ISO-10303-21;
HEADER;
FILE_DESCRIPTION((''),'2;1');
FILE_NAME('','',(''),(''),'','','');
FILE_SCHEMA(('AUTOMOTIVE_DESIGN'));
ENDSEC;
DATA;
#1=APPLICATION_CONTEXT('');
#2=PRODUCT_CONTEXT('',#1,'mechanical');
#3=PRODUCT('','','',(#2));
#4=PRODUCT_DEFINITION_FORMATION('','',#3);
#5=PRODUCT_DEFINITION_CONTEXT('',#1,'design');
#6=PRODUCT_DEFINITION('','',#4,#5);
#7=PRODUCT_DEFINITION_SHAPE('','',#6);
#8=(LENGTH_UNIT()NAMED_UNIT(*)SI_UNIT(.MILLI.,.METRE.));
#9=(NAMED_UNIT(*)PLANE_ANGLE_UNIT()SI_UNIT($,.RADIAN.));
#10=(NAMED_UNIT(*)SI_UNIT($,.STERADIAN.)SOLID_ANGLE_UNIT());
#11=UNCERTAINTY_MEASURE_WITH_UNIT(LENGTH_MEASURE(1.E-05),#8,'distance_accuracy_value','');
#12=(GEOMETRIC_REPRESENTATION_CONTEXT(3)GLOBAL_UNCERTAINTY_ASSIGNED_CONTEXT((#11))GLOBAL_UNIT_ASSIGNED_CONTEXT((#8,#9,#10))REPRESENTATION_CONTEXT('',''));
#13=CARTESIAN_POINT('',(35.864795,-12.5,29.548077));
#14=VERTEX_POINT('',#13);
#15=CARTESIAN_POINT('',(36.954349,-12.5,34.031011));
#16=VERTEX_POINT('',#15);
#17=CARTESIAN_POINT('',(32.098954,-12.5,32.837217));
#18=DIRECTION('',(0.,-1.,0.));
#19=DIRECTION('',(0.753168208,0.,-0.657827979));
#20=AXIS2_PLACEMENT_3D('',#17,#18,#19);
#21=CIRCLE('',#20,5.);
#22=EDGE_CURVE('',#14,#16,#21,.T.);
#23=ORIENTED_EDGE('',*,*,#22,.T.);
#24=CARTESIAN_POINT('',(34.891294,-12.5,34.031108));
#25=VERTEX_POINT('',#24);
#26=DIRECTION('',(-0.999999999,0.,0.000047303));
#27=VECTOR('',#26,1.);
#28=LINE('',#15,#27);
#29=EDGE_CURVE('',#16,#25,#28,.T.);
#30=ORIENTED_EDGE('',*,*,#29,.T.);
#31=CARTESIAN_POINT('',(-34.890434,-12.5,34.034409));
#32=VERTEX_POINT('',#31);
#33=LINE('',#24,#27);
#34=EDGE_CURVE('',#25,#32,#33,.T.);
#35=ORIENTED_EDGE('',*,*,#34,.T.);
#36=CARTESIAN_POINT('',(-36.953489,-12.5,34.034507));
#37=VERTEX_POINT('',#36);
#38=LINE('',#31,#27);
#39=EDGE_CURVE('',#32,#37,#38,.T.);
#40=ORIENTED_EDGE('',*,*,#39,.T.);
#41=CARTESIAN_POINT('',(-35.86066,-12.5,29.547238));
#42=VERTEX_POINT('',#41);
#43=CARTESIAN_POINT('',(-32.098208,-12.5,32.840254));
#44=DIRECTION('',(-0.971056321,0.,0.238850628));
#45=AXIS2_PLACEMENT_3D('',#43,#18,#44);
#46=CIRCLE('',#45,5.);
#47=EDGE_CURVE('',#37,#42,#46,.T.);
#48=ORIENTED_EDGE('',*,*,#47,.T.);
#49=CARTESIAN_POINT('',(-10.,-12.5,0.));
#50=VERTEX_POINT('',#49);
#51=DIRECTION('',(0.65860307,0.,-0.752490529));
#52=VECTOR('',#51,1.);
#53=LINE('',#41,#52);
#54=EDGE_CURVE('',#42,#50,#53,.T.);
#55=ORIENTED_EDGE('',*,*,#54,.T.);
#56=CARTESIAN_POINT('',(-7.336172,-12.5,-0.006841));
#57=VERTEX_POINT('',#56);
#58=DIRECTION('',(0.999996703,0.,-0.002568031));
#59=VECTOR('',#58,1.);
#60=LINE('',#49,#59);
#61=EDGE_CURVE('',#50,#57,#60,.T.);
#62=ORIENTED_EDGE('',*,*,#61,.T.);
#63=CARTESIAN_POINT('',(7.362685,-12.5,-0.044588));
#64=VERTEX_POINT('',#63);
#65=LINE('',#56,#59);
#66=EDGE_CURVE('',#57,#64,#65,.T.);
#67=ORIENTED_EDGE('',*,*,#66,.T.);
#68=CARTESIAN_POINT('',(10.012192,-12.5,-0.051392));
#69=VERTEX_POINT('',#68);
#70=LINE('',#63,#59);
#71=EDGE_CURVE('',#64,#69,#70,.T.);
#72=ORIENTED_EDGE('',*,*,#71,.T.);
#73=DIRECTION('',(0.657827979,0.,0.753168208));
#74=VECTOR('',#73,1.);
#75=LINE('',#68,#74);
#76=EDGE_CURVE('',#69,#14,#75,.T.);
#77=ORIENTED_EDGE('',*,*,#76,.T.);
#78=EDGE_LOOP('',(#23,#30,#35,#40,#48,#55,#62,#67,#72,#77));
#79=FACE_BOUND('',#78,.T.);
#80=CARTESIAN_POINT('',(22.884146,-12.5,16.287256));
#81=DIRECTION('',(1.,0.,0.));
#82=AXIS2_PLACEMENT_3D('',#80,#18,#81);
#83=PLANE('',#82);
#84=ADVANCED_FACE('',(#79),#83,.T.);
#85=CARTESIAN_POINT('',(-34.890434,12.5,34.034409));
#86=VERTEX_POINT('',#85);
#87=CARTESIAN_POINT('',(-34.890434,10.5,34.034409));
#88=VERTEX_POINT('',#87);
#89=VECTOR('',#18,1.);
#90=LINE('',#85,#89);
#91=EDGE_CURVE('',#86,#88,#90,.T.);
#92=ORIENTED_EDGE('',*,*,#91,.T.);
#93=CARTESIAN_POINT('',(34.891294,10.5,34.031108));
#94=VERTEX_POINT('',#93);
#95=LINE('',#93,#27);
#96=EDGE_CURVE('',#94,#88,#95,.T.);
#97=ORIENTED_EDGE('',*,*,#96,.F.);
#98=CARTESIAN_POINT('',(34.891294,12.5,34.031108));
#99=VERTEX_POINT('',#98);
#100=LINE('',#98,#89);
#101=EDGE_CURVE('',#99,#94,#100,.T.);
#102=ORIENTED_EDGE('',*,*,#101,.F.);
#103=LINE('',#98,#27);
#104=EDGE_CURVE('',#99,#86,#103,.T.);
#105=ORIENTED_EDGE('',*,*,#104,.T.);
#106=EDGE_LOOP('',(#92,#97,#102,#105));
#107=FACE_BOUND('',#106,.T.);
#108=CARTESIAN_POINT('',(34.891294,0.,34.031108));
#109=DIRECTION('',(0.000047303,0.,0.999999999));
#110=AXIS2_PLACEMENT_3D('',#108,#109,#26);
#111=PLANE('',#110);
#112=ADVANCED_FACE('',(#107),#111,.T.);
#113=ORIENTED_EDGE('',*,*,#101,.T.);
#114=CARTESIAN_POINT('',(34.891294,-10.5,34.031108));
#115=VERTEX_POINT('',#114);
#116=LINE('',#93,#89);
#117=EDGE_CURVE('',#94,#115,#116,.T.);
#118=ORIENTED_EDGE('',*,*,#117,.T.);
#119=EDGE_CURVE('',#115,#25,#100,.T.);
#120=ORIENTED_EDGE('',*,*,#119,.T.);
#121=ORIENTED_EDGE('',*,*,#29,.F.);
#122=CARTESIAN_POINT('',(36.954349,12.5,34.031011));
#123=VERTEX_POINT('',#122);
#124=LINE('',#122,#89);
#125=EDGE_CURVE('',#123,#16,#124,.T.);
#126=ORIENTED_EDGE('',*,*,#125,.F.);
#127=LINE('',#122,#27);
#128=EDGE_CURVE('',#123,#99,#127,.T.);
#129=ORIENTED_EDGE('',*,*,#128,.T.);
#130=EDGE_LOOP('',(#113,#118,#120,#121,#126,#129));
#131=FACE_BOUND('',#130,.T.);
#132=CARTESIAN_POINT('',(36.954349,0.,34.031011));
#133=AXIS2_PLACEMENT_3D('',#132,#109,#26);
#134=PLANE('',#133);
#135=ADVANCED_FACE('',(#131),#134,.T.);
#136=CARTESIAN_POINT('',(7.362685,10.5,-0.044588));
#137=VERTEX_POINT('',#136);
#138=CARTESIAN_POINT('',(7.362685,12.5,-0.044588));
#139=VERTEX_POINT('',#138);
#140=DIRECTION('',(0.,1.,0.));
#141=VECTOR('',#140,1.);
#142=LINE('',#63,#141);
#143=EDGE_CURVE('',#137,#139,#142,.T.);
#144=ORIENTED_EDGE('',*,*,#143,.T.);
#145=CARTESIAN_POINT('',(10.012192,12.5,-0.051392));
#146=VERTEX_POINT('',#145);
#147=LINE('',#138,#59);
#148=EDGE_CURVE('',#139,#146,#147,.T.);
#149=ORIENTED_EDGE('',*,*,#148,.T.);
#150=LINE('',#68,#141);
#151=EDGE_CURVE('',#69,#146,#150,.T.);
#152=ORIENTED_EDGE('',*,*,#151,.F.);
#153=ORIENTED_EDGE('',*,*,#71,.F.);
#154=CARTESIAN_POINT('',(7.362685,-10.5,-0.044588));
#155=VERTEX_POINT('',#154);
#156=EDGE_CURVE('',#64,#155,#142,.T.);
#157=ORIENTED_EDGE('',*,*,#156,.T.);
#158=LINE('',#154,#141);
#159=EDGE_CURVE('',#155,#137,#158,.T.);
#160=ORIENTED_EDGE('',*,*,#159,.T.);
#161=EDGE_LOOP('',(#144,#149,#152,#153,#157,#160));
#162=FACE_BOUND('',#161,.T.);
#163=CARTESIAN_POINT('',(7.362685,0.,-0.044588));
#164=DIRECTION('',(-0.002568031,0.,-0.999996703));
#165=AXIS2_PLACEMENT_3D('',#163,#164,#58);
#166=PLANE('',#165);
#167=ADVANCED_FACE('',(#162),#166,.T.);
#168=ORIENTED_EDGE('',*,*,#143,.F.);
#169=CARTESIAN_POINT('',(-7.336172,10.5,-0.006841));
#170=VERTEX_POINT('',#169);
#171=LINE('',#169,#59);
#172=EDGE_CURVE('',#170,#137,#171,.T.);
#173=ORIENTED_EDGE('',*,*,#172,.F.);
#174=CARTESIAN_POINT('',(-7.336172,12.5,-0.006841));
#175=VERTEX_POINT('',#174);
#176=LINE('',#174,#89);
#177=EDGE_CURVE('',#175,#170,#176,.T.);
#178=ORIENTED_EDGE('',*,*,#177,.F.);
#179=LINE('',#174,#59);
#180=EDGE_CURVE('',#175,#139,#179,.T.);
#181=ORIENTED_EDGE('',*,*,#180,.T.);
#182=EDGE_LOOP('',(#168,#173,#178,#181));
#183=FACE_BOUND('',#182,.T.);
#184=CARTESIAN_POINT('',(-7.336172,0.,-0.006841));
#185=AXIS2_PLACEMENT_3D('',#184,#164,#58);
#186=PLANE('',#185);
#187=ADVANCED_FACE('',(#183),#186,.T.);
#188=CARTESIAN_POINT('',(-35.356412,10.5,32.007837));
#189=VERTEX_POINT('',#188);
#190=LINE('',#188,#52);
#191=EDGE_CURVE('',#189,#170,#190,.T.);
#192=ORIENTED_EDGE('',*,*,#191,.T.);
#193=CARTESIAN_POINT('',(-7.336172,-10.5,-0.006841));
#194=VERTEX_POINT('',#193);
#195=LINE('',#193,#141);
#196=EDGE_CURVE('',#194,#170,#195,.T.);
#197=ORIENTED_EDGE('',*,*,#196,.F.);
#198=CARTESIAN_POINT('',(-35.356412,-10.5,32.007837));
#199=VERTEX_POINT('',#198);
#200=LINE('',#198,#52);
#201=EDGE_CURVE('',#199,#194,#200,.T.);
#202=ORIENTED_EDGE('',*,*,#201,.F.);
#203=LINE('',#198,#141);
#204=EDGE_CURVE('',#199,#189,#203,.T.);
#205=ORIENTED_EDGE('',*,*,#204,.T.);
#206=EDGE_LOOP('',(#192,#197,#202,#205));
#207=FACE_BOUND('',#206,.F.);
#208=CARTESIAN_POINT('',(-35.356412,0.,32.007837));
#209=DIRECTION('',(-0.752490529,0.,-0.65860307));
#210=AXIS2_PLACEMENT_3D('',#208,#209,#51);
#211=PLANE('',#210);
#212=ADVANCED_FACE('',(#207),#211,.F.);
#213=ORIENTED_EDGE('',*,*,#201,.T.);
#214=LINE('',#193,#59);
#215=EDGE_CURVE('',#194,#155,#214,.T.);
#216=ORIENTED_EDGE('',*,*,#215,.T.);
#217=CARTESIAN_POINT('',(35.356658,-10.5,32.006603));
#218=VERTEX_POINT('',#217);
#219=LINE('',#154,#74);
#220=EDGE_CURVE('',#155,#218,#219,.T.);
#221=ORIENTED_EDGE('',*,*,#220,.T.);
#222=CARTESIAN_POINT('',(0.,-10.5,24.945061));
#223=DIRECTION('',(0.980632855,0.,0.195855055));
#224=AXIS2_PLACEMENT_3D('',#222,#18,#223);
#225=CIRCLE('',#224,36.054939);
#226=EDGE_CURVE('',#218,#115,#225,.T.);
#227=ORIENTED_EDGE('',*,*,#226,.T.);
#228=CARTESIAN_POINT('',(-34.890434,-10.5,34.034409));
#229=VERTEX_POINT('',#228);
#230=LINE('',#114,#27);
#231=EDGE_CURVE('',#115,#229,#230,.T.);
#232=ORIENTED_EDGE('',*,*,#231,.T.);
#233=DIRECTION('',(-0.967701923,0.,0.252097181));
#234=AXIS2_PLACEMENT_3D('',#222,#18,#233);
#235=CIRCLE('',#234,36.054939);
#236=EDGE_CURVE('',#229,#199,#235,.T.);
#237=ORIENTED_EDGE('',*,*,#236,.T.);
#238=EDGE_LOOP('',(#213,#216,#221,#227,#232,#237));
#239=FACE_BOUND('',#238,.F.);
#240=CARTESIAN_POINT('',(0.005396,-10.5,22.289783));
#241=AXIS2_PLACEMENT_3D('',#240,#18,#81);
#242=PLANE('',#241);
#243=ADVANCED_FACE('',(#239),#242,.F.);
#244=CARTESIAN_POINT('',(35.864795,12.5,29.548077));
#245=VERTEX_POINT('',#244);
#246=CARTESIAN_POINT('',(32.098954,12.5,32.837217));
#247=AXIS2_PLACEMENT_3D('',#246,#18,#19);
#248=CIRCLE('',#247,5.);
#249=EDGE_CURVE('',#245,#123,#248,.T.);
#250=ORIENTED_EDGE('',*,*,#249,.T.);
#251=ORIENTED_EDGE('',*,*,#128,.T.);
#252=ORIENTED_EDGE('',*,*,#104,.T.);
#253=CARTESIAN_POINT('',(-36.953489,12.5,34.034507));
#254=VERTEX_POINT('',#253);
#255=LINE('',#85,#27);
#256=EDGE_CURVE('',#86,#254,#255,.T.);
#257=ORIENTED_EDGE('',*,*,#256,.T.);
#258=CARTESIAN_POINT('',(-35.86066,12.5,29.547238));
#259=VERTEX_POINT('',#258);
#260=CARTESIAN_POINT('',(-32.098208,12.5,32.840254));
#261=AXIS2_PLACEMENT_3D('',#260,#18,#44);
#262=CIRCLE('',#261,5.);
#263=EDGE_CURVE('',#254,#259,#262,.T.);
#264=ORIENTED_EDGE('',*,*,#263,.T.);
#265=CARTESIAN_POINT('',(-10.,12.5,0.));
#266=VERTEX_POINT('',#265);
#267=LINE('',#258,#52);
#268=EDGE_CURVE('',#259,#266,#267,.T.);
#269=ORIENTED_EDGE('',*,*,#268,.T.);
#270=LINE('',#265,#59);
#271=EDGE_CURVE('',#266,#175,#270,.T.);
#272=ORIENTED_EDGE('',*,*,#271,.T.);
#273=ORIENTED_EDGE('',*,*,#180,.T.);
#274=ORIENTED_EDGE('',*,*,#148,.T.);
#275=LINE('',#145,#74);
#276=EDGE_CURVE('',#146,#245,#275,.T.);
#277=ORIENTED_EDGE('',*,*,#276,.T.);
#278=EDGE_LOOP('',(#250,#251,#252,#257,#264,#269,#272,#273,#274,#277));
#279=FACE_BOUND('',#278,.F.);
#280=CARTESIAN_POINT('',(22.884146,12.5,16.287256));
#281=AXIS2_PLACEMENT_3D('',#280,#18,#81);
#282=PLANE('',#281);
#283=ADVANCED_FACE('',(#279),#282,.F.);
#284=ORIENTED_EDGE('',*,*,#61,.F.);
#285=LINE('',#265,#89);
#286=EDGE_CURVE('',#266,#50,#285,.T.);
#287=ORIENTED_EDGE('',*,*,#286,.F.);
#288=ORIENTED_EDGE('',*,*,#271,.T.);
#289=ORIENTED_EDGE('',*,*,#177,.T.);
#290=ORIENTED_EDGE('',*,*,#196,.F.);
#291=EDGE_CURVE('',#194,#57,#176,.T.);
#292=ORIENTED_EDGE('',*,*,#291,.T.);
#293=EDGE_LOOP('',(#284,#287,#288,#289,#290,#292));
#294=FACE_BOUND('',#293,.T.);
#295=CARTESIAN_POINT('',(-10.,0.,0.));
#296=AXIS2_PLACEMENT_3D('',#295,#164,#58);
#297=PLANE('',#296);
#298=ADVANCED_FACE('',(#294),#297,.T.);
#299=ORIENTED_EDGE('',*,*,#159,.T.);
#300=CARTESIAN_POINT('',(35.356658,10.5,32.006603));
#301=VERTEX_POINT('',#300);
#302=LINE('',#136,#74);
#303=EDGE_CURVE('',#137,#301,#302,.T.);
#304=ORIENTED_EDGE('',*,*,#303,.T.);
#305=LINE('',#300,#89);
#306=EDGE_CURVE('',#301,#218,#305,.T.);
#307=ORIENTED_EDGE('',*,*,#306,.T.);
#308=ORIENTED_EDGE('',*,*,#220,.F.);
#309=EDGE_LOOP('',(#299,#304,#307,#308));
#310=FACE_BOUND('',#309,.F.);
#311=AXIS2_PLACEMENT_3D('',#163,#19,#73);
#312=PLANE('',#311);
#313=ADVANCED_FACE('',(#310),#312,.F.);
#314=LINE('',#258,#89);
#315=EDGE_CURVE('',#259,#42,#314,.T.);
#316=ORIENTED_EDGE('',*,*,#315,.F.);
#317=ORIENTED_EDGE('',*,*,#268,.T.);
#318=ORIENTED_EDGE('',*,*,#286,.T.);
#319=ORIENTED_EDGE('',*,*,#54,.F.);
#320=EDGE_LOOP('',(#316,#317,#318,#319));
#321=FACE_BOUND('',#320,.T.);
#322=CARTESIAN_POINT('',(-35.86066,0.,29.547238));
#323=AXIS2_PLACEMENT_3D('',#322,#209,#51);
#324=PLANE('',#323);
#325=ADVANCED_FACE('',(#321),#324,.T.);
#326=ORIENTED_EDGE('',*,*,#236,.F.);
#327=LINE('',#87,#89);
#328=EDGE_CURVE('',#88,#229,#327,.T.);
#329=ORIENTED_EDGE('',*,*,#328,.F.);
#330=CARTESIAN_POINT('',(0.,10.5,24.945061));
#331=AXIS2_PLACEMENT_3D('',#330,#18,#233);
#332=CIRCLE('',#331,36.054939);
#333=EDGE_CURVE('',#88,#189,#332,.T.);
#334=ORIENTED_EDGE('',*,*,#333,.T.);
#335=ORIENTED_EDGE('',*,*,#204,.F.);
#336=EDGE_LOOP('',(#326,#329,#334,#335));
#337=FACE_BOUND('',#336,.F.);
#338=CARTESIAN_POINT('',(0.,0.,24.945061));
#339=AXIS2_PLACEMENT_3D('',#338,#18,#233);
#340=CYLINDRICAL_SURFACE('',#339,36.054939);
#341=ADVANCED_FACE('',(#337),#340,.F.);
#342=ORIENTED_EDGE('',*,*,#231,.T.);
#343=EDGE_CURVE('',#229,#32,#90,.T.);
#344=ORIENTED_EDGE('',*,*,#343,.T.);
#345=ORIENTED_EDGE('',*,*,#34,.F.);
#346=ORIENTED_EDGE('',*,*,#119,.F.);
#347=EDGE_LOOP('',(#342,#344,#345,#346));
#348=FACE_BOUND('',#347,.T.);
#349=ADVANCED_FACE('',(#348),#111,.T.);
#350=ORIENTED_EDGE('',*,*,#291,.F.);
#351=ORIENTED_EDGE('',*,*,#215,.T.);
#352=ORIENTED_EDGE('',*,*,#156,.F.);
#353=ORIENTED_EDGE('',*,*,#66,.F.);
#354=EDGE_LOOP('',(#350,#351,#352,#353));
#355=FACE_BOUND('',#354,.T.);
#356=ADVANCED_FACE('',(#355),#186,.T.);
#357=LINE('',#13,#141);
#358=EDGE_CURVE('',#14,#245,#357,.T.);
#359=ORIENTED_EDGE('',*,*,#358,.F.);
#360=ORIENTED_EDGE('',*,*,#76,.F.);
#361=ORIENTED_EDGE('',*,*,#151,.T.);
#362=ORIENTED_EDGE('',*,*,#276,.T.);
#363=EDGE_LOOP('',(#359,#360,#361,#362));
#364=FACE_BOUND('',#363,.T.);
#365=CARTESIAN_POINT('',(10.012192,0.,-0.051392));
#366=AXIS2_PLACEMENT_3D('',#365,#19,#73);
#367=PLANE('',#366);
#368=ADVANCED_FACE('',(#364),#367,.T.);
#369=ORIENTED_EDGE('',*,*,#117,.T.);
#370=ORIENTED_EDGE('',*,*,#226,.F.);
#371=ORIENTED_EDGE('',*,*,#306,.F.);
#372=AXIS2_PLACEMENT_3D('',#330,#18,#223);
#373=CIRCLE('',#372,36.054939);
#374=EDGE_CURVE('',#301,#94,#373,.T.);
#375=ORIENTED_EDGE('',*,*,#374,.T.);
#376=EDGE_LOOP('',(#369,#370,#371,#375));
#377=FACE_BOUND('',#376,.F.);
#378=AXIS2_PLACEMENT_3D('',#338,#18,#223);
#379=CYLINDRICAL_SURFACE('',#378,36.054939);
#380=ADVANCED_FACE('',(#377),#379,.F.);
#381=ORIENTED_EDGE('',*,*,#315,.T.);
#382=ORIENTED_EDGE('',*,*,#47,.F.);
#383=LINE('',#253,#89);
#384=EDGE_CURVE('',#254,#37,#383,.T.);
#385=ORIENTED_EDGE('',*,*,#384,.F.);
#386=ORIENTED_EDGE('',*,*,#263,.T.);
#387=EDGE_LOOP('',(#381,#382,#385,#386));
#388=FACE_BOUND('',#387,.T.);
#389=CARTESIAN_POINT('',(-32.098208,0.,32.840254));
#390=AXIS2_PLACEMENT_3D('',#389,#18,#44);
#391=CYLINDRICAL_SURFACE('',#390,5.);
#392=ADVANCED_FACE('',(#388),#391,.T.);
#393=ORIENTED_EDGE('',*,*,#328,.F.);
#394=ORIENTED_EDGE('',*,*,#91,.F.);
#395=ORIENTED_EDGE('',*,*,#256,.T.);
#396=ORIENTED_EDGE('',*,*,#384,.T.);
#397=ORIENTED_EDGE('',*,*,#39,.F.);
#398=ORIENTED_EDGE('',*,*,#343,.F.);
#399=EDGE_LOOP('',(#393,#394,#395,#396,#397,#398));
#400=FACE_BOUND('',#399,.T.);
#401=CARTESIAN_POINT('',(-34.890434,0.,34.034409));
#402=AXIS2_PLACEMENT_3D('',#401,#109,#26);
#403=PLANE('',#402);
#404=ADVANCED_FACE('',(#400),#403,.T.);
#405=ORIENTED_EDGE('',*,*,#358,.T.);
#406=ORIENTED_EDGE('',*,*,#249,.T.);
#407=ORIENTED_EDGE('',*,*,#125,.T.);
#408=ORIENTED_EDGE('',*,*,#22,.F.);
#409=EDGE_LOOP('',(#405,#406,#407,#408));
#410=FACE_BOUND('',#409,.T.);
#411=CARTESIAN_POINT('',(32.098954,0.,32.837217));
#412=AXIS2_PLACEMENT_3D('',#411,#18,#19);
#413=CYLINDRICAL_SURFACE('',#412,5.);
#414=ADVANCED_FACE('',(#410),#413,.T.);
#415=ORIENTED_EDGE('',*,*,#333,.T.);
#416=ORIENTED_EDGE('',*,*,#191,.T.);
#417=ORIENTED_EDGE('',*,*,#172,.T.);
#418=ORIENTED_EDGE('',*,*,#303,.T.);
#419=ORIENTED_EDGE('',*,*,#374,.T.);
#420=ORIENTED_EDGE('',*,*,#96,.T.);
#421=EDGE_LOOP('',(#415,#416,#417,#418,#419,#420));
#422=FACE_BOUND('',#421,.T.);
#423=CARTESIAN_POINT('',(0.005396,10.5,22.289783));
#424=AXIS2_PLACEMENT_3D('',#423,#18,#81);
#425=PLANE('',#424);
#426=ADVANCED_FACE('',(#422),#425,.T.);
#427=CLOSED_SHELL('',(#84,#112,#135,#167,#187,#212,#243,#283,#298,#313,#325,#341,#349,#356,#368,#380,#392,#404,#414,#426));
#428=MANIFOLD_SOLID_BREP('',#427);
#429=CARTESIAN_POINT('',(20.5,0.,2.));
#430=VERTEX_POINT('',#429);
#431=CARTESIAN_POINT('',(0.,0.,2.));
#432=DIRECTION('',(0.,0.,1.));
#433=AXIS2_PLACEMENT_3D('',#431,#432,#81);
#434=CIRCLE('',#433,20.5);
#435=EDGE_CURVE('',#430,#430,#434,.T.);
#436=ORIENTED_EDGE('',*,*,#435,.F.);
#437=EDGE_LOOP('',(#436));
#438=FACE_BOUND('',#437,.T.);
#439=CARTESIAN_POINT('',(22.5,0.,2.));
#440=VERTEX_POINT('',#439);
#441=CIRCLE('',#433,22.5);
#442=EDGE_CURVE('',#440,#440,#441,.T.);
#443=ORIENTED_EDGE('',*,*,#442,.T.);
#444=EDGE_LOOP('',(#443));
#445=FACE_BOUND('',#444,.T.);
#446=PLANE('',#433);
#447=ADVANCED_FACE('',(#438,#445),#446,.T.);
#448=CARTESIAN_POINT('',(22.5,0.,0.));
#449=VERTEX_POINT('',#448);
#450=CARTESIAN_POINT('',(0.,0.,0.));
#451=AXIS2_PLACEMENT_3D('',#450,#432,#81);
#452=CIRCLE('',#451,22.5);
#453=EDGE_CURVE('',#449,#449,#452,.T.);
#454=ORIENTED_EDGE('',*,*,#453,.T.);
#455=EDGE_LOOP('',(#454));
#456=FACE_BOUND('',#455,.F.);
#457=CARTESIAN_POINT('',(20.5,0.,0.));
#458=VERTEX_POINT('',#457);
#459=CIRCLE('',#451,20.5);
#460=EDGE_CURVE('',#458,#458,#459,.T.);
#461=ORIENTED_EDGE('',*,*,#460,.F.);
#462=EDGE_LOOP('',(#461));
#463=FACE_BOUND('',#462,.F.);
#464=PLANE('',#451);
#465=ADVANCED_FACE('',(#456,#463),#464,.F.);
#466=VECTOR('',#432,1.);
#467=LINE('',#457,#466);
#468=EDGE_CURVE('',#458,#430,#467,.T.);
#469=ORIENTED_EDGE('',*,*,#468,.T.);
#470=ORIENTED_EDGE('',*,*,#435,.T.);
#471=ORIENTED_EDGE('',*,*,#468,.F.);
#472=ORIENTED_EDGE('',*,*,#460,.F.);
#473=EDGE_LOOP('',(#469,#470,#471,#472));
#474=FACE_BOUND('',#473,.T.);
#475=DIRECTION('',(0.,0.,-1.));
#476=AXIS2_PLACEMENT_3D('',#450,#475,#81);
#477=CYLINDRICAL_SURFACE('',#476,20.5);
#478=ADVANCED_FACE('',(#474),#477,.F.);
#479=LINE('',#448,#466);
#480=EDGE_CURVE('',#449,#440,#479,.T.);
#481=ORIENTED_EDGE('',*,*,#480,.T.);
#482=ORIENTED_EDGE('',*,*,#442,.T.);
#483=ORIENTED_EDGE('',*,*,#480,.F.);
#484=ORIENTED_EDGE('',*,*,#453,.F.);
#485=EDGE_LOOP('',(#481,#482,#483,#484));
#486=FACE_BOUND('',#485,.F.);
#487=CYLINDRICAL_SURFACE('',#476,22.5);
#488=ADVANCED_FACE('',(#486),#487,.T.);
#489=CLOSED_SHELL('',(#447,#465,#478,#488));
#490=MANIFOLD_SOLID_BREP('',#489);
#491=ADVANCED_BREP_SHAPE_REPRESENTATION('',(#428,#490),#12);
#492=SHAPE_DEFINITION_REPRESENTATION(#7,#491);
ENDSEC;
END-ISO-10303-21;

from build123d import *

# Parameters (mm, degrees)
F0_R     = 22.5
F0_R_2   = 20.5
F1_DEPTH = 2
F3_DEPTH = 12.5
F4_DEPTH = 10.5


with BuildPart() as f1:
    # F0 (on Top) → F1 (new body)
    with BuildSketch(Plane.XY):
        Circle(F0_R)
        Circle(F0_R_2, mode=Mode.SUBTRACT)
    extrude(amount=F1_DEPTH)


with BuildPart() as f3:
    # F2 (on Front) → F3 (new body, symmetric)
    with BuildSketch(Plane.XZ):
        with BuildLine():
            ThreePointArc((35.8647954681, 29.5480771848), (36.9575138291, 31.6563697), (36.9543489902, 34.0310108793))
            Line((36.9543489902, 34.0310108793), (35.3566579925, 32.0066029077))
            Line((35.3566579925, 32.0066029077), (7.3626854021, -0.0445880533))
            Line((7.3626854021, -0.0445880533), (10.0121919702, -0.0513920895))
            Line((10.0121919702, -0.0513920895), (35.8647954681, 29.5480771848))
        make_face()
        with BuildLine():
            Line((35.3566579925, 32.0066029077), (36.9543489902, 34.0310108793))
            Line((36.9543489902, 34.0310108793), (34.8912937434, 34.031108467))
            ThreePointArc((34.8912937434, 34.031108467), (35.1385591119, 33.022207874), (35.3566579925, 32.0066029077))
        make_face()
        with BuildLine():
            Line((7.3626854021, -0.0445880533), (35.3566579925, 32.0066029077))
            ThreePointArc((35.3566579925, 32.0066029077), (35.1385591119, 33.022207874), (34.8912937434, 34.031108467))
            Line((34.8912937434, 34.031108467), (-34.8904340011, 34.0344093193))
            ThreePointArc((-34.8904340011, 34.0344093193), (-35.1380360371, 33.0244831042), (-35.3564115486, 32.0078367231))
            Line((-35.3564115486, 32.0078367231), (-7.3361719456, -0.0068408143))
            Line((-7.3361719456, -0.0068408143), (7.3626854021, -0.0445880533))
        make_face()
        with BuildLine():
            Line((-35.3564115486, 32.0078367231), (-36.953489248, 34.0345069071))
            ThreePointArc((-36.953489248, 34.0345069071), (-36.9562144908, 31.6571352246), (-35.8606602894, 29.5472384177))
            Line((-35.8606602894, 29.5472384177), (-10, 0))
            Line((-10, 0), (-7.3361719456, -0.0068408143))
            Line((-7.3361719456, -0.0068408143), (-35.3564115486, 32.0078367231))
        make_face()
        with BuildLine():
            Line((-34.8904340011, 34.0344093193), (-36.953489248, 34.0345069071))
            Line((-36.953489248, 34.0345069071), (-35.3564115486, 32.0078367231))
            ThreePointArc((-35.3564115486, 32.0078367231), (-35.1380360371, 33.0244831042), (-34.8904340011, 34.0344093193))
        make_face()
    extrude(amount=F3_DEPTH, both=True)

    # F2 (on Front) → F4 (cut, symmetric)
    with BuildSketch(Plane.XZ):
        with BuildLine():
            ThreePointArc((8.42e-08, 63), (23.4777886852, 54.8945488781), (36.9543489902, 34.0310108793))
            Line((36.9543489902, 34.0310108793), (36.9557192967, 63))
            Line((36.9557192967, 63), (8.42e-08, 63))
        make_face()
        with BuildLine():
            Line((7.3626854021, -0.0445880533), (35.3566579925, 32.0066029077))
            ThreePointArc((35.3566579925, 32.0066029077), (35.1385591119, 33.022207874), (34.8912937434, 34.031108467))
            Line((34.8912937434, 34.031108467), (-34.8904340011, 34.0344093193))
            ThreePointArc((-34.8904340011, 34.0344093193), (-35.1380360371, 33.0244831042), (-35.3564115486, 32.0078367231))
            Line((-35.3564115486, 32.0078367231), (-7.3361719456, -0.0068408143))
            Line((-7.3361719456, -0.0068408143), (7.3626854021, -0.0445880533))
        make_face()
    extrude(amount=F4_DEPTH, both=True, mode=Mode.SUBTRACT)


solid = Compound([f1.part, f3.part])
